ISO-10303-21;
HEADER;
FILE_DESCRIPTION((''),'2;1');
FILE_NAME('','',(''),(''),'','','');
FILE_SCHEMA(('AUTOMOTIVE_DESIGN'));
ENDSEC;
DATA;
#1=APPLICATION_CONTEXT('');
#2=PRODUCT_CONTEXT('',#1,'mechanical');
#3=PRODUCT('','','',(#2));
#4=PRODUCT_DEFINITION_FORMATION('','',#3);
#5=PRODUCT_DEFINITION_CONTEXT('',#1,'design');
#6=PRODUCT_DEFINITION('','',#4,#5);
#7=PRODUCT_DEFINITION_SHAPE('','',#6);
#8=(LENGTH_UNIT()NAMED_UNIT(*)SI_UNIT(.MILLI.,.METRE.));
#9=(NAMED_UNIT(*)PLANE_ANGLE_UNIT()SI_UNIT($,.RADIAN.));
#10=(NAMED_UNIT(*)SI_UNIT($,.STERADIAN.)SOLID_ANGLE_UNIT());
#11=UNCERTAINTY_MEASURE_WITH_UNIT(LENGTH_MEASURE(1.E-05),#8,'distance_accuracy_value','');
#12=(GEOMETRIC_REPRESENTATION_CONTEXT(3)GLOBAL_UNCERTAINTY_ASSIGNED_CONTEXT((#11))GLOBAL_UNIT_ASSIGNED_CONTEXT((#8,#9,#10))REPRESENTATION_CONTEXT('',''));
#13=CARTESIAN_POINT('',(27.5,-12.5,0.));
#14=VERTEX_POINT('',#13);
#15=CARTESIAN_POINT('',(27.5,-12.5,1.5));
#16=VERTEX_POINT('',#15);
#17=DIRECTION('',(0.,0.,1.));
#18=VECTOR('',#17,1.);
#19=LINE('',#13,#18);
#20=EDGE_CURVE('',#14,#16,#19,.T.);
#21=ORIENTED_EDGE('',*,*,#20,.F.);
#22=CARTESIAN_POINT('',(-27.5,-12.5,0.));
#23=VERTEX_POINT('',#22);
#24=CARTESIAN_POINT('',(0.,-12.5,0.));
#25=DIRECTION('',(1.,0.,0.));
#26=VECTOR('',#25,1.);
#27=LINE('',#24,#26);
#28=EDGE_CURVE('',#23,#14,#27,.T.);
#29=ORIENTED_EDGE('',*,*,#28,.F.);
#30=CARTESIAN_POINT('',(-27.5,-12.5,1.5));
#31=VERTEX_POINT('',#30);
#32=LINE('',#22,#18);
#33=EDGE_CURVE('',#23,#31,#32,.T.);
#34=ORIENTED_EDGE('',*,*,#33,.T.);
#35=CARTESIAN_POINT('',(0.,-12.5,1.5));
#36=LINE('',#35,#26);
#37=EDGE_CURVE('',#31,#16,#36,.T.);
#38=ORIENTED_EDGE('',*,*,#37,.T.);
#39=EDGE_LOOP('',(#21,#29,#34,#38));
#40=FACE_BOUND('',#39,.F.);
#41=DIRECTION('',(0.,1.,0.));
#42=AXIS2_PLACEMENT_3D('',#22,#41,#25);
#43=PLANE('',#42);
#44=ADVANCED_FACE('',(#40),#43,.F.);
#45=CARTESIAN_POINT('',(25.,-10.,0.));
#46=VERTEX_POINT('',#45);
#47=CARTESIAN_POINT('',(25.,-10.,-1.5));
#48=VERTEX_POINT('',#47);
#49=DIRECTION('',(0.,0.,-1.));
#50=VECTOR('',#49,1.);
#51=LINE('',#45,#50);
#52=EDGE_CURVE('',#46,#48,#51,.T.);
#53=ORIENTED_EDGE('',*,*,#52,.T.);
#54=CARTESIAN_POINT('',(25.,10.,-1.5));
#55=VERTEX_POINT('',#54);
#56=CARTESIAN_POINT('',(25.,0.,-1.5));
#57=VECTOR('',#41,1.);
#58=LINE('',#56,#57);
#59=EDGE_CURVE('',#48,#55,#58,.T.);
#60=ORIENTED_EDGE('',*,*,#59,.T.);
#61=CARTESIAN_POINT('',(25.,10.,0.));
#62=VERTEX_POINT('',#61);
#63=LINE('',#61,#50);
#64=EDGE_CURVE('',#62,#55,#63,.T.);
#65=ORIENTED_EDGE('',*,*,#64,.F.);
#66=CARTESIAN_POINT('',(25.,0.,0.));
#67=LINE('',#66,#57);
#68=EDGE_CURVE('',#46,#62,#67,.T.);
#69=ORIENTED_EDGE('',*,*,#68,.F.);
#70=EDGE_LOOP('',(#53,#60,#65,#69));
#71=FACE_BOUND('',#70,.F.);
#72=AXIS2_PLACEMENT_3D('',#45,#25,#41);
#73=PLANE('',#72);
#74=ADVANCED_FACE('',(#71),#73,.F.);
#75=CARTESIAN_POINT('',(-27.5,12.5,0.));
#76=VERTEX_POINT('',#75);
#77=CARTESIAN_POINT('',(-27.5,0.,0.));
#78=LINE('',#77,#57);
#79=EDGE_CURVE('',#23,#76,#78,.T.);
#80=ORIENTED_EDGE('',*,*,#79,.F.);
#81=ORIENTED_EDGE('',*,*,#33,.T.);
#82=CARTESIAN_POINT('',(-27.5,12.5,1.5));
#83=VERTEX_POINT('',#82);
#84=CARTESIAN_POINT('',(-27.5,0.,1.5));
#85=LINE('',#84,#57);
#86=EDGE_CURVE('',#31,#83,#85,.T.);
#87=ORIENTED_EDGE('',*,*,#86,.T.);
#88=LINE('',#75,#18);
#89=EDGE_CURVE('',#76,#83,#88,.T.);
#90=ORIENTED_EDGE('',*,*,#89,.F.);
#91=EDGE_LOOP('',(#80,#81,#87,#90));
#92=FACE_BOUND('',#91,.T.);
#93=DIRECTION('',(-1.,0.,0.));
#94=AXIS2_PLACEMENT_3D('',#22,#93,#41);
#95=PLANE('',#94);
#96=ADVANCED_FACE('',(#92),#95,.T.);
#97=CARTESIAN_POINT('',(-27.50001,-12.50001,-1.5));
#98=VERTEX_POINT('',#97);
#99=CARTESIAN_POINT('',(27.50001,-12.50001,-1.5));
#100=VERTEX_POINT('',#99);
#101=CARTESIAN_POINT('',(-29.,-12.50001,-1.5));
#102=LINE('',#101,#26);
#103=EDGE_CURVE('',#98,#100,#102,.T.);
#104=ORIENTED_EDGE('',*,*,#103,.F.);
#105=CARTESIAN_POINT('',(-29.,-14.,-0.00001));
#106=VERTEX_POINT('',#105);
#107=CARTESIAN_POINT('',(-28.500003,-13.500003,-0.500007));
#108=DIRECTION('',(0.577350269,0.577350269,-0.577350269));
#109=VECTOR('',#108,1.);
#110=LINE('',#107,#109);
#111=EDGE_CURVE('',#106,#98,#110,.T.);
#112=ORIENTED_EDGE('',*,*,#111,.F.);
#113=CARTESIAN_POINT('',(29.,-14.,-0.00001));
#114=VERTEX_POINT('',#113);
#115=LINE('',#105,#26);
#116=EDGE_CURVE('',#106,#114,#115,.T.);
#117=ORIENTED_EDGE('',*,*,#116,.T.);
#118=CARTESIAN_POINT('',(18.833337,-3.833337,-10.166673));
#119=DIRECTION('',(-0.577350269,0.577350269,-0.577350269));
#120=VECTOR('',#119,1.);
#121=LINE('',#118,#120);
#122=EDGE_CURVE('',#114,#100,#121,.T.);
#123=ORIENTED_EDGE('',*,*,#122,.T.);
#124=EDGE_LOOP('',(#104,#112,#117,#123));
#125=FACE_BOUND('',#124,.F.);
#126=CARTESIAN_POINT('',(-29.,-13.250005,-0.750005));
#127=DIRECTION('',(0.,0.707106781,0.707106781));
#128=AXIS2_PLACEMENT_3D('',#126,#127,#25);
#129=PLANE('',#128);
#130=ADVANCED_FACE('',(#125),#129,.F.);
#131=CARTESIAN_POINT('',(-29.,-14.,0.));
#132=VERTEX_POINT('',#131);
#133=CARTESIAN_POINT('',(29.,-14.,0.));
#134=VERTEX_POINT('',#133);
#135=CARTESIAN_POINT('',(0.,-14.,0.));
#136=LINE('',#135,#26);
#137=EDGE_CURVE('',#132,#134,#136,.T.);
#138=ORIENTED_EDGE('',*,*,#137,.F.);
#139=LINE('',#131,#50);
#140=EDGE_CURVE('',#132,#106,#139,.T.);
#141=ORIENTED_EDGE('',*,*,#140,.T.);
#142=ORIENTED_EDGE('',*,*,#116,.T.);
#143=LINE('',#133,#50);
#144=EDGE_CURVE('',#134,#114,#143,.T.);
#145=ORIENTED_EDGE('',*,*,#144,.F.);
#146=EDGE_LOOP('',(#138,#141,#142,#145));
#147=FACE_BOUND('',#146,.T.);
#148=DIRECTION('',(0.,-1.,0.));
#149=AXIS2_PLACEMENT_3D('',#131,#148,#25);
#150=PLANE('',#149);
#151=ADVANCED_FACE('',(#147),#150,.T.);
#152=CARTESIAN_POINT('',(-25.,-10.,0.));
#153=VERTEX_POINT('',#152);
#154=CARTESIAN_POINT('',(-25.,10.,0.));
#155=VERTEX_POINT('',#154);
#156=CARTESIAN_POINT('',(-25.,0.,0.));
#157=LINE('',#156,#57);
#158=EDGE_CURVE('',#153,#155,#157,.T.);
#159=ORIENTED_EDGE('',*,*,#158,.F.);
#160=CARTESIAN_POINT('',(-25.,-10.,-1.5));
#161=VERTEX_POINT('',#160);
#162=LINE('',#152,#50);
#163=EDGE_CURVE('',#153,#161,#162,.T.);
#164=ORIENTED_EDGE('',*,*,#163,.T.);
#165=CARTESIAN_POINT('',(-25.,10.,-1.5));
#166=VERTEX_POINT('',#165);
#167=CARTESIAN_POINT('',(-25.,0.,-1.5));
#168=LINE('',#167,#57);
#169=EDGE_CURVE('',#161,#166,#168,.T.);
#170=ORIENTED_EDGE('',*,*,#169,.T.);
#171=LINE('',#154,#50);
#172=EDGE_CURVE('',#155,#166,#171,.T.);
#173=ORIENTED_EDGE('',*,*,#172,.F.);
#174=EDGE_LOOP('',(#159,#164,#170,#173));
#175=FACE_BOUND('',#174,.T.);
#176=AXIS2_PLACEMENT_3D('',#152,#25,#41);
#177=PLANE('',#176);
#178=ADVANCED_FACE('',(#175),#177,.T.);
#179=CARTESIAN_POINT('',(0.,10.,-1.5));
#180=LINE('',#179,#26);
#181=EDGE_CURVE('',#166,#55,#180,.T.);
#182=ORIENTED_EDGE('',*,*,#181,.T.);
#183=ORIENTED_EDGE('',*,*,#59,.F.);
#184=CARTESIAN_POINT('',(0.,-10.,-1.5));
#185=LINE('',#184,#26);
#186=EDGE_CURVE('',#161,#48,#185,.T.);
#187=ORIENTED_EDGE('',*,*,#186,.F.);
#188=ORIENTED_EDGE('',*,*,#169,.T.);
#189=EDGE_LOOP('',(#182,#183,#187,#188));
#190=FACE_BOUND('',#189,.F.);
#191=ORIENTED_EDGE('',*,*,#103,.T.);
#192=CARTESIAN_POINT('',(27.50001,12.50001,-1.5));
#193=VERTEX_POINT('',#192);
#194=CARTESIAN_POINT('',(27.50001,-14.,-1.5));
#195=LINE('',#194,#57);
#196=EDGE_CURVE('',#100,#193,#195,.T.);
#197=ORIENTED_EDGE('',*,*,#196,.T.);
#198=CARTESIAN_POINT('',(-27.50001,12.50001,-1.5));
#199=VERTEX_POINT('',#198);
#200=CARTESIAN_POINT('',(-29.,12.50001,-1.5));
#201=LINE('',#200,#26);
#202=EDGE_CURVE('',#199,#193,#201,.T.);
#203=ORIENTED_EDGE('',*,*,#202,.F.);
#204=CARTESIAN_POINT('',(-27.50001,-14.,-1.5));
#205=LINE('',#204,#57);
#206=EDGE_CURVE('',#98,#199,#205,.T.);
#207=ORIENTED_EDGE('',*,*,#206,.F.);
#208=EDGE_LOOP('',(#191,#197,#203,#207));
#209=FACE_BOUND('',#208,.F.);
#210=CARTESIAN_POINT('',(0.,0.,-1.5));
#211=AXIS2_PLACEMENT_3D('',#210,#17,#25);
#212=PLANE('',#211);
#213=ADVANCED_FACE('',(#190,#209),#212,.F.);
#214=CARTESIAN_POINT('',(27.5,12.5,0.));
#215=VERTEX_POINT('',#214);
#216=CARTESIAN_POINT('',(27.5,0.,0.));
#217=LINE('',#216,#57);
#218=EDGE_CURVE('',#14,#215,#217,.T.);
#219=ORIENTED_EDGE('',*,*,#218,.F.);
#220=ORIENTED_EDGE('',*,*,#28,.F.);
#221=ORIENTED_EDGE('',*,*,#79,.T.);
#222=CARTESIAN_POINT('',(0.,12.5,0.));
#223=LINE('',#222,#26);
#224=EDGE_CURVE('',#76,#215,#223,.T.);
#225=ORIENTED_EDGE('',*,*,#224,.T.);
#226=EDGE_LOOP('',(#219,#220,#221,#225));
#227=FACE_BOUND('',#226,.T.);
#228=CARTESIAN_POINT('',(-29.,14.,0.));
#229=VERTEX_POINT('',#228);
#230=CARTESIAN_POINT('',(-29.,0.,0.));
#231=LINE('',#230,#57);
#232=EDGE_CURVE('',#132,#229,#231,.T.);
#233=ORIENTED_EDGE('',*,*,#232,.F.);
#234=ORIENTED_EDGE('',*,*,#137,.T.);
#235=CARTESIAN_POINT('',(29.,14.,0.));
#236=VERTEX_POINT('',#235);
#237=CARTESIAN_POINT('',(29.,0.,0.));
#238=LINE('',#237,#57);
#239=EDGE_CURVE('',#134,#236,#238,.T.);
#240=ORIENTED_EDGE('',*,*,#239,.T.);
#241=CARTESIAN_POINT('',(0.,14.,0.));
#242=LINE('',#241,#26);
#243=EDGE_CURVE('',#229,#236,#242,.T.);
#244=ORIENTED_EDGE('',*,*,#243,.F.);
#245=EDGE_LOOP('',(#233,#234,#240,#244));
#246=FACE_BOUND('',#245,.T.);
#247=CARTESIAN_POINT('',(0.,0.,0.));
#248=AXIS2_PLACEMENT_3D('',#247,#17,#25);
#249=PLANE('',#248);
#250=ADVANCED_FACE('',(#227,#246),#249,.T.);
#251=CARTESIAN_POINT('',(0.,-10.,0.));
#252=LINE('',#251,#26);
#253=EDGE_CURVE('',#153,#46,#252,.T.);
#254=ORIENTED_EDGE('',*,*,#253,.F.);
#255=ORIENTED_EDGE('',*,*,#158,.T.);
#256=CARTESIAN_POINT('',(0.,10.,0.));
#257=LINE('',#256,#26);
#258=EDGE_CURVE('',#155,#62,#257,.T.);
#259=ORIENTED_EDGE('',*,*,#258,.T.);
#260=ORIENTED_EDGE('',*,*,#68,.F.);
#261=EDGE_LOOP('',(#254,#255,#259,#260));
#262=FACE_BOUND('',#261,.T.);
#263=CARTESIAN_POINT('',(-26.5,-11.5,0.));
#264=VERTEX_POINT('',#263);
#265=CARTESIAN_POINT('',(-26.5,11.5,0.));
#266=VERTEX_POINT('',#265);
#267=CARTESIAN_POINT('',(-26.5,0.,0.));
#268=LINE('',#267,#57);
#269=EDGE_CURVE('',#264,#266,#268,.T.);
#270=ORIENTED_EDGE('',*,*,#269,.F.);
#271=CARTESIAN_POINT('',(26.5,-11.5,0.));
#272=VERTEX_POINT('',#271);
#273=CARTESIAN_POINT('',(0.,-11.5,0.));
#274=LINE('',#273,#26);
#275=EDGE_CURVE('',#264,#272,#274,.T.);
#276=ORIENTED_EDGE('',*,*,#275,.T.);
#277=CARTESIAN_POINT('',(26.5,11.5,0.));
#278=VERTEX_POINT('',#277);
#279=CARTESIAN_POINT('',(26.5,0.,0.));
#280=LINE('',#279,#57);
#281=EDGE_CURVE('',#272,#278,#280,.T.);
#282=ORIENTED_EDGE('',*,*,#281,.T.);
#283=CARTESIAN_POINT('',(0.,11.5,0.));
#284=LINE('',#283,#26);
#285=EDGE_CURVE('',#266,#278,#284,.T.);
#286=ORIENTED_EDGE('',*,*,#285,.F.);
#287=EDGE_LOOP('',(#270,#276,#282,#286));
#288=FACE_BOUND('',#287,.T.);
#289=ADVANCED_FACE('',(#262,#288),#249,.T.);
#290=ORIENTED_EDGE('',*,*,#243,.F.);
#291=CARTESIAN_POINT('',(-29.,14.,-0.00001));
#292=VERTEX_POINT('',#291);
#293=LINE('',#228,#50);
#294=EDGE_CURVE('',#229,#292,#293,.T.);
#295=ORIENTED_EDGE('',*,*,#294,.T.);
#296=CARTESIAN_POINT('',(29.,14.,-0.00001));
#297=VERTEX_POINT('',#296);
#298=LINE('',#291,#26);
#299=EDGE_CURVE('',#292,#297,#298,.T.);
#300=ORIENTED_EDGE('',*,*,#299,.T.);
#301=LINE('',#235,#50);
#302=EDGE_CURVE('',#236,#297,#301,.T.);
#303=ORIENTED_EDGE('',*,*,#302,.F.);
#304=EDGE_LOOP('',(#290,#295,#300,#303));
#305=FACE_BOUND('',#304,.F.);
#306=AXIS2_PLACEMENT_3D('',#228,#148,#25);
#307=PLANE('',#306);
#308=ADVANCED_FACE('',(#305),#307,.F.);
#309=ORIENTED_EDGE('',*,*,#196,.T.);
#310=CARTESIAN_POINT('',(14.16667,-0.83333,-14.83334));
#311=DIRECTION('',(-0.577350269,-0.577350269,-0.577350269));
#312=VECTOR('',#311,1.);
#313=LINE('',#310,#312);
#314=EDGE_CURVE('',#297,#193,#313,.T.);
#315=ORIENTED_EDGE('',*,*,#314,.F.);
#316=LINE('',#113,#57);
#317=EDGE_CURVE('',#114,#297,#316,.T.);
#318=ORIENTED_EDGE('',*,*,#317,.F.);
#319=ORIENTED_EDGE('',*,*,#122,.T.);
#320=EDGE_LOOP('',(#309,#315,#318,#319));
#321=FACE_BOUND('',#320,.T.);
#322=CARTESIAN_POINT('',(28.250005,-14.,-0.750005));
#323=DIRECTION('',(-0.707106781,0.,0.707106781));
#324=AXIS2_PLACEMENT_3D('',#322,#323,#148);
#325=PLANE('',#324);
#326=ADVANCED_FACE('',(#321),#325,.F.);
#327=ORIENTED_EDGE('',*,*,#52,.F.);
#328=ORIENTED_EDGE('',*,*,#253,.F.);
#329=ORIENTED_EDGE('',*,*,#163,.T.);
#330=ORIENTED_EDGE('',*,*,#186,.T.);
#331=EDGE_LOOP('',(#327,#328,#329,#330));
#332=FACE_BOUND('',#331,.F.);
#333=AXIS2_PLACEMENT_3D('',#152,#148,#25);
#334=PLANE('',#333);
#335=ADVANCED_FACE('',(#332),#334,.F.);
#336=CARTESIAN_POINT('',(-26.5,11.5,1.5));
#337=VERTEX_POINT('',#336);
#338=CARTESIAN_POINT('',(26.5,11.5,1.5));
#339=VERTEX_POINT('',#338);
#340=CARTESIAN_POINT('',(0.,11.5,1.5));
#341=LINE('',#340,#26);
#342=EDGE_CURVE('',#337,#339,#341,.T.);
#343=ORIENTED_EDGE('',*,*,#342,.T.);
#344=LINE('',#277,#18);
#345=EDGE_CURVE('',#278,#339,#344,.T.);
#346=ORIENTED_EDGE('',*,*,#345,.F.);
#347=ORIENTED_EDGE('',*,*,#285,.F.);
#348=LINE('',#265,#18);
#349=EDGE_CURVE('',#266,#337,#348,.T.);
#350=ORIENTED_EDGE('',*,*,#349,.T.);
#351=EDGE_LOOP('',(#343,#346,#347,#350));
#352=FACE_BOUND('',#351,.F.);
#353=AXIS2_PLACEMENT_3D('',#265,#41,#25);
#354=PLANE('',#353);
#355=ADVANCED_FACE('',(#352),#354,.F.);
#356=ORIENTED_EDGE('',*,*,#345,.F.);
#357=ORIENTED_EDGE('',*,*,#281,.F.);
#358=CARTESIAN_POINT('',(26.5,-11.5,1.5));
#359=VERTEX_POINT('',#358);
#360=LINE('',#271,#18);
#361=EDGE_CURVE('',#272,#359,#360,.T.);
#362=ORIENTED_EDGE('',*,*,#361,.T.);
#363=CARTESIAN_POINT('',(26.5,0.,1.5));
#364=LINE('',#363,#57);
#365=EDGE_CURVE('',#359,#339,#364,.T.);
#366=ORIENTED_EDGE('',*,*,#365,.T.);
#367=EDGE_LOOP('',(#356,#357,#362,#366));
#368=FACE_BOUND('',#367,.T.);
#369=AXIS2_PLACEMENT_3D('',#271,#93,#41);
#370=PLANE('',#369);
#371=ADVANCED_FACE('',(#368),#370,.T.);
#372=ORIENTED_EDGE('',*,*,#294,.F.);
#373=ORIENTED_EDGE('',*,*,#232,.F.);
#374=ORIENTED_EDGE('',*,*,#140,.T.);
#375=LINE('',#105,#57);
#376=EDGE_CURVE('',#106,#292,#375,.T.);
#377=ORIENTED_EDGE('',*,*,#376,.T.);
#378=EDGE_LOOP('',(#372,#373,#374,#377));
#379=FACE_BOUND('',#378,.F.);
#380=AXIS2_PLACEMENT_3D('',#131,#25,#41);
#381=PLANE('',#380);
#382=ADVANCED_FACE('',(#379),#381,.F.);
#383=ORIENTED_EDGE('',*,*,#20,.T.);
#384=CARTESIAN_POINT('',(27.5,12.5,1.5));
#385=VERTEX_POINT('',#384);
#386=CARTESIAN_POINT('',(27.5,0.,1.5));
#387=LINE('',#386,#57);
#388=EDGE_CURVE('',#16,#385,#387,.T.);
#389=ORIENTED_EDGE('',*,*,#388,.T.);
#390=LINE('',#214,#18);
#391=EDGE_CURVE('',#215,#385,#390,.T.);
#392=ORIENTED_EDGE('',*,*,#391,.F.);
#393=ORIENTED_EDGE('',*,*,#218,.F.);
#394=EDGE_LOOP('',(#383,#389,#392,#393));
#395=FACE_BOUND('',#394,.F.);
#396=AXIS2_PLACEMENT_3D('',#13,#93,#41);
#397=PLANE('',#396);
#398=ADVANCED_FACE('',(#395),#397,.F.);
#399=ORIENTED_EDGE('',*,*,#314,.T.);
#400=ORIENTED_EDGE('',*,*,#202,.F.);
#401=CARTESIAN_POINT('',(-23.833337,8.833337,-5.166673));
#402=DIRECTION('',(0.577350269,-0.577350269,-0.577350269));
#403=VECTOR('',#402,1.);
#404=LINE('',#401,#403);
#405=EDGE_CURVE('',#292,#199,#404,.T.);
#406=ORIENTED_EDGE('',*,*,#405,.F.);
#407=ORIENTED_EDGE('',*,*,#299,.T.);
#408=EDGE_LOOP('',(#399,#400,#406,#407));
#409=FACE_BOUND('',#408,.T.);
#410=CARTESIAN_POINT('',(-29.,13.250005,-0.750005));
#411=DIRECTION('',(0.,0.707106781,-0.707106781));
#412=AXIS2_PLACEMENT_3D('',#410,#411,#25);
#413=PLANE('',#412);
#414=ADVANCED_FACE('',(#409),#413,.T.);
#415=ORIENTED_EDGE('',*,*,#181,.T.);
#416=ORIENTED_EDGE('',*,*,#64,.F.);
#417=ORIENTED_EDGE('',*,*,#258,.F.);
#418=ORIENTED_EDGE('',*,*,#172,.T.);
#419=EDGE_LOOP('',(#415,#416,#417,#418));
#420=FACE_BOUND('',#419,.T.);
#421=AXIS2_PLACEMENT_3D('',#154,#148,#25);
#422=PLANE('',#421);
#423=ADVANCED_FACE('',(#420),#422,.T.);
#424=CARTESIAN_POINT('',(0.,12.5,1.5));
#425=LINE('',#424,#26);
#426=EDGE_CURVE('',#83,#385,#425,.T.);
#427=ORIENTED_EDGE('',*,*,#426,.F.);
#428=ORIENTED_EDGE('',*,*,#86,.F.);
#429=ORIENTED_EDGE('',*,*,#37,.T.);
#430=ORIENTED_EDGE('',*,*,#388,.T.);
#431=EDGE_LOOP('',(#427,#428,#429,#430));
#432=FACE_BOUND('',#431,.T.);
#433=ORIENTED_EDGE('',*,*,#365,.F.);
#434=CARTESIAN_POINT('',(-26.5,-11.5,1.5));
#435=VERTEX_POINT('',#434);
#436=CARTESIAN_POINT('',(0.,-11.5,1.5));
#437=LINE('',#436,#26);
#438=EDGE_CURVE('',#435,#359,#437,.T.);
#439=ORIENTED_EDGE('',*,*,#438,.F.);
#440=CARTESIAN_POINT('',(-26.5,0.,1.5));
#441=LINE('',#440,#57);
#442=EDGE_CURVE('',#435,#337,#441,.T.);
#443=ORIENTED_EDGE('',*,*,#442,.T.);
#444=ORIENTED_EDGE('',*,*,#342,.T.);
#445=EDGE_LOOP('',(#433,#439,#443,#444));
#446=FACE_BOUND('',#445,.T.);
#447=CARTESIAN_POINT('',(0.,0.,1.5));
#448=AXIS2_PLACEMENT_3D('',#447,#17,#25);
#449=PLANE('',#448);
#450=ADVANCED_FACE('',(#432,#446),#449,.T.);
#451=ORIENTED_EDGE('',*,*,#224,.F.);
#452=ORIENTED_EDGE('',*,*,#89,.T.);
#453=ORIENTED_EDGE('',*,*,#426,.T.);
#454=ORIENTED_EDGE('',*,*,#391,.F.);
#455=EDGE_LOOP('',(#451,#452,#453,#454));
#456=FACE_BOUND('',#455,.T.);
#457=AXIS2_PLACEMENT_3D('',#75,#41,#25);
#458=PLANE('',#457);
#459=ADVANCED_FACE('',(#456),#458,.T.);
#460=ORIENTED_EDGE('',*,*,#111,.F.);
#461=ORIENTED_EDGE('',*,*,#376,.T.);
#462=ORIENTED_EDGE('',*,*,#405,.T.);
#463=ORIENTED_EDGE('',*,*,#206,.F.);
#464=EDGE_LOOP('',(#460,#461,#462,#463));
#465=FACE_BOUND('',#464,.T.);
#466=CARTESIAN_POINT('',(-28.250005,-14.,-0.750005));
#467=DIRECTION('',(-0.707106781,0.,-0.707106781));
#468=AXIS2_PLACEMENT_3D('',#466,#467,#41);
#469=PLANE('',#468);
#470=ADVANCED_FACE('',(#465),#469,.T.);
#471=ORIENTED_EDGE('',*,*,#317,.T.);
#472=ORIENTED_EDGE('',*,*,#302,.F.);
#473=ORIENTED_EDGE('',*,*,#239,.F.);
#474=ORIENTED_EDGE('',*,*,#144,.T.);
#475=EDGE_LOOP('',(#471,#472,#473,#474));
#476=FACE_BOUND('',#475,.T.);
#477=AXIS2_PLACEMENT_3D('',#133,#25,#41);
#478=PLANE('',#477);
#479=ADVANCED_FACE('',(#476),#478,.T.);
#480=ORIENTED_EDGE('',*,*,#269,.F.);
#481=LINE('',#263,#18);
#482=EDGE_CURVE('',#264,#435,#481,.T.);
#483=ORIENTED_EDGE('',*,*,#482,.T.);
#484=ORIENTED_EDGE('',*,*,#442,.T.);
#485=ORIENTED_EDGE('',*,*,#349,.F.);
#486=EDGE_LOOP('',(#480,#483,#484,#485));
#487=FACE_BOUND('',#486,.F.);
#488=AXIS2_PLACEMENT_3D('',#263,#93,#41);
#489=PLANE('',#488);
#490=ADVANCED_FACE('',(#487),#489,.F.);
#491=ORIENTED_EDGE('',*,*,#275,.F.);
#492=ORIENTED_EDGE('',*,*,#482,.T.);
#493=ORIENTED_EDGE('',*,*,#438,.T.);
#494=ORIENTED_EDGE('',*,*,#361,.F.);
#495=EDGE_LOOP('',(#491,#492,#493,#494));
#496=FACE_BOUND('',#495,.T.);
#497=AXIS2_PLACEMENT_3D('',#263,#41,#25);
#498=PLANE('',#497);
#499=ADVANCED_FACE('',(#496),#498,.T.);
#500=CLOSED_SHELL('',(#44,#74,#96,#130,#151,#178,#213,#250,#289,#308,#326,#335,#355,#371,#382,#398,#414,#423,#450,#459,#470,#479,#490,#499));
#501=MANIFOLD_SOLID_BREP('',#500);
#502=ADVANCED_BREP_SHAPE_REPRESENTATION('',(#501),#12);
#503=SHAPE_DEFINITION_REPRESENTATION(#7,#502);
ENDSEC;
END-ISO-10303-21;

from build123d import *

# Parameters (mm, degrees)
F0_W     = 58
F0_H     = 28
F0_W_2   = 55
F0_H_2   = 25
F0_W_3   = 53
F0_H_3   = 23
F0_W_4   = 50
F0_H_4   = 20
F1_DEPTH = 1.5
F2_DEPTH = 1.5
F3_SIZE  = 1.49999


# Not quite as in the source:
# - a fillet or chamfer is up to 0.001 mm smaller than in the source, because OpenCascade refuses the exact size


with BuildPart() as f1:
    # F0 (on Top) → F1 (new body)
    with BuildSketch(Plane.XY):
        Rectangle(F0_W, F0_H)
        Rectangle(F0_W_2, F0_H_2, mode=Mode.SUBTRACT)
        Rectangle(F0_W_2, F0_H_2)
        Rectangle(F0_W_3, F0_H_3, mode=Mode.SUBTRACT)
        Rectangle(F0_W_3, F0_H_3)
        Rectangle(F0_W_4, F0_H_4, mode=Mode.SUBTRACT)
    extrude(amount=-F1_DEPTH)

    # F0 (on Top) → F2 (join)
    with BuildSketch(Plane.XY):
        Rectangle(F0_W_2, F0_H_2)
        Rectangle(F0_W_3, F0_H_3, mode=Mode.SUBTRACT)
    extrude(amount=F2_DEPTH)

    # F3 (size 1.5 in the source; OpenCascade refuses exactly that, so slightly less here)
    f3_edges = [f1.edges().sort_by_distance(p)[0] for p in [
        (0, -14, -1.5),
        (-29, 0, -1.5),
        (0, 14, -1.5),
        (29, 0, -1.5),
    ]]
    chamfer(f3_edges, length=F3_SIZE)


solid = f1.part
